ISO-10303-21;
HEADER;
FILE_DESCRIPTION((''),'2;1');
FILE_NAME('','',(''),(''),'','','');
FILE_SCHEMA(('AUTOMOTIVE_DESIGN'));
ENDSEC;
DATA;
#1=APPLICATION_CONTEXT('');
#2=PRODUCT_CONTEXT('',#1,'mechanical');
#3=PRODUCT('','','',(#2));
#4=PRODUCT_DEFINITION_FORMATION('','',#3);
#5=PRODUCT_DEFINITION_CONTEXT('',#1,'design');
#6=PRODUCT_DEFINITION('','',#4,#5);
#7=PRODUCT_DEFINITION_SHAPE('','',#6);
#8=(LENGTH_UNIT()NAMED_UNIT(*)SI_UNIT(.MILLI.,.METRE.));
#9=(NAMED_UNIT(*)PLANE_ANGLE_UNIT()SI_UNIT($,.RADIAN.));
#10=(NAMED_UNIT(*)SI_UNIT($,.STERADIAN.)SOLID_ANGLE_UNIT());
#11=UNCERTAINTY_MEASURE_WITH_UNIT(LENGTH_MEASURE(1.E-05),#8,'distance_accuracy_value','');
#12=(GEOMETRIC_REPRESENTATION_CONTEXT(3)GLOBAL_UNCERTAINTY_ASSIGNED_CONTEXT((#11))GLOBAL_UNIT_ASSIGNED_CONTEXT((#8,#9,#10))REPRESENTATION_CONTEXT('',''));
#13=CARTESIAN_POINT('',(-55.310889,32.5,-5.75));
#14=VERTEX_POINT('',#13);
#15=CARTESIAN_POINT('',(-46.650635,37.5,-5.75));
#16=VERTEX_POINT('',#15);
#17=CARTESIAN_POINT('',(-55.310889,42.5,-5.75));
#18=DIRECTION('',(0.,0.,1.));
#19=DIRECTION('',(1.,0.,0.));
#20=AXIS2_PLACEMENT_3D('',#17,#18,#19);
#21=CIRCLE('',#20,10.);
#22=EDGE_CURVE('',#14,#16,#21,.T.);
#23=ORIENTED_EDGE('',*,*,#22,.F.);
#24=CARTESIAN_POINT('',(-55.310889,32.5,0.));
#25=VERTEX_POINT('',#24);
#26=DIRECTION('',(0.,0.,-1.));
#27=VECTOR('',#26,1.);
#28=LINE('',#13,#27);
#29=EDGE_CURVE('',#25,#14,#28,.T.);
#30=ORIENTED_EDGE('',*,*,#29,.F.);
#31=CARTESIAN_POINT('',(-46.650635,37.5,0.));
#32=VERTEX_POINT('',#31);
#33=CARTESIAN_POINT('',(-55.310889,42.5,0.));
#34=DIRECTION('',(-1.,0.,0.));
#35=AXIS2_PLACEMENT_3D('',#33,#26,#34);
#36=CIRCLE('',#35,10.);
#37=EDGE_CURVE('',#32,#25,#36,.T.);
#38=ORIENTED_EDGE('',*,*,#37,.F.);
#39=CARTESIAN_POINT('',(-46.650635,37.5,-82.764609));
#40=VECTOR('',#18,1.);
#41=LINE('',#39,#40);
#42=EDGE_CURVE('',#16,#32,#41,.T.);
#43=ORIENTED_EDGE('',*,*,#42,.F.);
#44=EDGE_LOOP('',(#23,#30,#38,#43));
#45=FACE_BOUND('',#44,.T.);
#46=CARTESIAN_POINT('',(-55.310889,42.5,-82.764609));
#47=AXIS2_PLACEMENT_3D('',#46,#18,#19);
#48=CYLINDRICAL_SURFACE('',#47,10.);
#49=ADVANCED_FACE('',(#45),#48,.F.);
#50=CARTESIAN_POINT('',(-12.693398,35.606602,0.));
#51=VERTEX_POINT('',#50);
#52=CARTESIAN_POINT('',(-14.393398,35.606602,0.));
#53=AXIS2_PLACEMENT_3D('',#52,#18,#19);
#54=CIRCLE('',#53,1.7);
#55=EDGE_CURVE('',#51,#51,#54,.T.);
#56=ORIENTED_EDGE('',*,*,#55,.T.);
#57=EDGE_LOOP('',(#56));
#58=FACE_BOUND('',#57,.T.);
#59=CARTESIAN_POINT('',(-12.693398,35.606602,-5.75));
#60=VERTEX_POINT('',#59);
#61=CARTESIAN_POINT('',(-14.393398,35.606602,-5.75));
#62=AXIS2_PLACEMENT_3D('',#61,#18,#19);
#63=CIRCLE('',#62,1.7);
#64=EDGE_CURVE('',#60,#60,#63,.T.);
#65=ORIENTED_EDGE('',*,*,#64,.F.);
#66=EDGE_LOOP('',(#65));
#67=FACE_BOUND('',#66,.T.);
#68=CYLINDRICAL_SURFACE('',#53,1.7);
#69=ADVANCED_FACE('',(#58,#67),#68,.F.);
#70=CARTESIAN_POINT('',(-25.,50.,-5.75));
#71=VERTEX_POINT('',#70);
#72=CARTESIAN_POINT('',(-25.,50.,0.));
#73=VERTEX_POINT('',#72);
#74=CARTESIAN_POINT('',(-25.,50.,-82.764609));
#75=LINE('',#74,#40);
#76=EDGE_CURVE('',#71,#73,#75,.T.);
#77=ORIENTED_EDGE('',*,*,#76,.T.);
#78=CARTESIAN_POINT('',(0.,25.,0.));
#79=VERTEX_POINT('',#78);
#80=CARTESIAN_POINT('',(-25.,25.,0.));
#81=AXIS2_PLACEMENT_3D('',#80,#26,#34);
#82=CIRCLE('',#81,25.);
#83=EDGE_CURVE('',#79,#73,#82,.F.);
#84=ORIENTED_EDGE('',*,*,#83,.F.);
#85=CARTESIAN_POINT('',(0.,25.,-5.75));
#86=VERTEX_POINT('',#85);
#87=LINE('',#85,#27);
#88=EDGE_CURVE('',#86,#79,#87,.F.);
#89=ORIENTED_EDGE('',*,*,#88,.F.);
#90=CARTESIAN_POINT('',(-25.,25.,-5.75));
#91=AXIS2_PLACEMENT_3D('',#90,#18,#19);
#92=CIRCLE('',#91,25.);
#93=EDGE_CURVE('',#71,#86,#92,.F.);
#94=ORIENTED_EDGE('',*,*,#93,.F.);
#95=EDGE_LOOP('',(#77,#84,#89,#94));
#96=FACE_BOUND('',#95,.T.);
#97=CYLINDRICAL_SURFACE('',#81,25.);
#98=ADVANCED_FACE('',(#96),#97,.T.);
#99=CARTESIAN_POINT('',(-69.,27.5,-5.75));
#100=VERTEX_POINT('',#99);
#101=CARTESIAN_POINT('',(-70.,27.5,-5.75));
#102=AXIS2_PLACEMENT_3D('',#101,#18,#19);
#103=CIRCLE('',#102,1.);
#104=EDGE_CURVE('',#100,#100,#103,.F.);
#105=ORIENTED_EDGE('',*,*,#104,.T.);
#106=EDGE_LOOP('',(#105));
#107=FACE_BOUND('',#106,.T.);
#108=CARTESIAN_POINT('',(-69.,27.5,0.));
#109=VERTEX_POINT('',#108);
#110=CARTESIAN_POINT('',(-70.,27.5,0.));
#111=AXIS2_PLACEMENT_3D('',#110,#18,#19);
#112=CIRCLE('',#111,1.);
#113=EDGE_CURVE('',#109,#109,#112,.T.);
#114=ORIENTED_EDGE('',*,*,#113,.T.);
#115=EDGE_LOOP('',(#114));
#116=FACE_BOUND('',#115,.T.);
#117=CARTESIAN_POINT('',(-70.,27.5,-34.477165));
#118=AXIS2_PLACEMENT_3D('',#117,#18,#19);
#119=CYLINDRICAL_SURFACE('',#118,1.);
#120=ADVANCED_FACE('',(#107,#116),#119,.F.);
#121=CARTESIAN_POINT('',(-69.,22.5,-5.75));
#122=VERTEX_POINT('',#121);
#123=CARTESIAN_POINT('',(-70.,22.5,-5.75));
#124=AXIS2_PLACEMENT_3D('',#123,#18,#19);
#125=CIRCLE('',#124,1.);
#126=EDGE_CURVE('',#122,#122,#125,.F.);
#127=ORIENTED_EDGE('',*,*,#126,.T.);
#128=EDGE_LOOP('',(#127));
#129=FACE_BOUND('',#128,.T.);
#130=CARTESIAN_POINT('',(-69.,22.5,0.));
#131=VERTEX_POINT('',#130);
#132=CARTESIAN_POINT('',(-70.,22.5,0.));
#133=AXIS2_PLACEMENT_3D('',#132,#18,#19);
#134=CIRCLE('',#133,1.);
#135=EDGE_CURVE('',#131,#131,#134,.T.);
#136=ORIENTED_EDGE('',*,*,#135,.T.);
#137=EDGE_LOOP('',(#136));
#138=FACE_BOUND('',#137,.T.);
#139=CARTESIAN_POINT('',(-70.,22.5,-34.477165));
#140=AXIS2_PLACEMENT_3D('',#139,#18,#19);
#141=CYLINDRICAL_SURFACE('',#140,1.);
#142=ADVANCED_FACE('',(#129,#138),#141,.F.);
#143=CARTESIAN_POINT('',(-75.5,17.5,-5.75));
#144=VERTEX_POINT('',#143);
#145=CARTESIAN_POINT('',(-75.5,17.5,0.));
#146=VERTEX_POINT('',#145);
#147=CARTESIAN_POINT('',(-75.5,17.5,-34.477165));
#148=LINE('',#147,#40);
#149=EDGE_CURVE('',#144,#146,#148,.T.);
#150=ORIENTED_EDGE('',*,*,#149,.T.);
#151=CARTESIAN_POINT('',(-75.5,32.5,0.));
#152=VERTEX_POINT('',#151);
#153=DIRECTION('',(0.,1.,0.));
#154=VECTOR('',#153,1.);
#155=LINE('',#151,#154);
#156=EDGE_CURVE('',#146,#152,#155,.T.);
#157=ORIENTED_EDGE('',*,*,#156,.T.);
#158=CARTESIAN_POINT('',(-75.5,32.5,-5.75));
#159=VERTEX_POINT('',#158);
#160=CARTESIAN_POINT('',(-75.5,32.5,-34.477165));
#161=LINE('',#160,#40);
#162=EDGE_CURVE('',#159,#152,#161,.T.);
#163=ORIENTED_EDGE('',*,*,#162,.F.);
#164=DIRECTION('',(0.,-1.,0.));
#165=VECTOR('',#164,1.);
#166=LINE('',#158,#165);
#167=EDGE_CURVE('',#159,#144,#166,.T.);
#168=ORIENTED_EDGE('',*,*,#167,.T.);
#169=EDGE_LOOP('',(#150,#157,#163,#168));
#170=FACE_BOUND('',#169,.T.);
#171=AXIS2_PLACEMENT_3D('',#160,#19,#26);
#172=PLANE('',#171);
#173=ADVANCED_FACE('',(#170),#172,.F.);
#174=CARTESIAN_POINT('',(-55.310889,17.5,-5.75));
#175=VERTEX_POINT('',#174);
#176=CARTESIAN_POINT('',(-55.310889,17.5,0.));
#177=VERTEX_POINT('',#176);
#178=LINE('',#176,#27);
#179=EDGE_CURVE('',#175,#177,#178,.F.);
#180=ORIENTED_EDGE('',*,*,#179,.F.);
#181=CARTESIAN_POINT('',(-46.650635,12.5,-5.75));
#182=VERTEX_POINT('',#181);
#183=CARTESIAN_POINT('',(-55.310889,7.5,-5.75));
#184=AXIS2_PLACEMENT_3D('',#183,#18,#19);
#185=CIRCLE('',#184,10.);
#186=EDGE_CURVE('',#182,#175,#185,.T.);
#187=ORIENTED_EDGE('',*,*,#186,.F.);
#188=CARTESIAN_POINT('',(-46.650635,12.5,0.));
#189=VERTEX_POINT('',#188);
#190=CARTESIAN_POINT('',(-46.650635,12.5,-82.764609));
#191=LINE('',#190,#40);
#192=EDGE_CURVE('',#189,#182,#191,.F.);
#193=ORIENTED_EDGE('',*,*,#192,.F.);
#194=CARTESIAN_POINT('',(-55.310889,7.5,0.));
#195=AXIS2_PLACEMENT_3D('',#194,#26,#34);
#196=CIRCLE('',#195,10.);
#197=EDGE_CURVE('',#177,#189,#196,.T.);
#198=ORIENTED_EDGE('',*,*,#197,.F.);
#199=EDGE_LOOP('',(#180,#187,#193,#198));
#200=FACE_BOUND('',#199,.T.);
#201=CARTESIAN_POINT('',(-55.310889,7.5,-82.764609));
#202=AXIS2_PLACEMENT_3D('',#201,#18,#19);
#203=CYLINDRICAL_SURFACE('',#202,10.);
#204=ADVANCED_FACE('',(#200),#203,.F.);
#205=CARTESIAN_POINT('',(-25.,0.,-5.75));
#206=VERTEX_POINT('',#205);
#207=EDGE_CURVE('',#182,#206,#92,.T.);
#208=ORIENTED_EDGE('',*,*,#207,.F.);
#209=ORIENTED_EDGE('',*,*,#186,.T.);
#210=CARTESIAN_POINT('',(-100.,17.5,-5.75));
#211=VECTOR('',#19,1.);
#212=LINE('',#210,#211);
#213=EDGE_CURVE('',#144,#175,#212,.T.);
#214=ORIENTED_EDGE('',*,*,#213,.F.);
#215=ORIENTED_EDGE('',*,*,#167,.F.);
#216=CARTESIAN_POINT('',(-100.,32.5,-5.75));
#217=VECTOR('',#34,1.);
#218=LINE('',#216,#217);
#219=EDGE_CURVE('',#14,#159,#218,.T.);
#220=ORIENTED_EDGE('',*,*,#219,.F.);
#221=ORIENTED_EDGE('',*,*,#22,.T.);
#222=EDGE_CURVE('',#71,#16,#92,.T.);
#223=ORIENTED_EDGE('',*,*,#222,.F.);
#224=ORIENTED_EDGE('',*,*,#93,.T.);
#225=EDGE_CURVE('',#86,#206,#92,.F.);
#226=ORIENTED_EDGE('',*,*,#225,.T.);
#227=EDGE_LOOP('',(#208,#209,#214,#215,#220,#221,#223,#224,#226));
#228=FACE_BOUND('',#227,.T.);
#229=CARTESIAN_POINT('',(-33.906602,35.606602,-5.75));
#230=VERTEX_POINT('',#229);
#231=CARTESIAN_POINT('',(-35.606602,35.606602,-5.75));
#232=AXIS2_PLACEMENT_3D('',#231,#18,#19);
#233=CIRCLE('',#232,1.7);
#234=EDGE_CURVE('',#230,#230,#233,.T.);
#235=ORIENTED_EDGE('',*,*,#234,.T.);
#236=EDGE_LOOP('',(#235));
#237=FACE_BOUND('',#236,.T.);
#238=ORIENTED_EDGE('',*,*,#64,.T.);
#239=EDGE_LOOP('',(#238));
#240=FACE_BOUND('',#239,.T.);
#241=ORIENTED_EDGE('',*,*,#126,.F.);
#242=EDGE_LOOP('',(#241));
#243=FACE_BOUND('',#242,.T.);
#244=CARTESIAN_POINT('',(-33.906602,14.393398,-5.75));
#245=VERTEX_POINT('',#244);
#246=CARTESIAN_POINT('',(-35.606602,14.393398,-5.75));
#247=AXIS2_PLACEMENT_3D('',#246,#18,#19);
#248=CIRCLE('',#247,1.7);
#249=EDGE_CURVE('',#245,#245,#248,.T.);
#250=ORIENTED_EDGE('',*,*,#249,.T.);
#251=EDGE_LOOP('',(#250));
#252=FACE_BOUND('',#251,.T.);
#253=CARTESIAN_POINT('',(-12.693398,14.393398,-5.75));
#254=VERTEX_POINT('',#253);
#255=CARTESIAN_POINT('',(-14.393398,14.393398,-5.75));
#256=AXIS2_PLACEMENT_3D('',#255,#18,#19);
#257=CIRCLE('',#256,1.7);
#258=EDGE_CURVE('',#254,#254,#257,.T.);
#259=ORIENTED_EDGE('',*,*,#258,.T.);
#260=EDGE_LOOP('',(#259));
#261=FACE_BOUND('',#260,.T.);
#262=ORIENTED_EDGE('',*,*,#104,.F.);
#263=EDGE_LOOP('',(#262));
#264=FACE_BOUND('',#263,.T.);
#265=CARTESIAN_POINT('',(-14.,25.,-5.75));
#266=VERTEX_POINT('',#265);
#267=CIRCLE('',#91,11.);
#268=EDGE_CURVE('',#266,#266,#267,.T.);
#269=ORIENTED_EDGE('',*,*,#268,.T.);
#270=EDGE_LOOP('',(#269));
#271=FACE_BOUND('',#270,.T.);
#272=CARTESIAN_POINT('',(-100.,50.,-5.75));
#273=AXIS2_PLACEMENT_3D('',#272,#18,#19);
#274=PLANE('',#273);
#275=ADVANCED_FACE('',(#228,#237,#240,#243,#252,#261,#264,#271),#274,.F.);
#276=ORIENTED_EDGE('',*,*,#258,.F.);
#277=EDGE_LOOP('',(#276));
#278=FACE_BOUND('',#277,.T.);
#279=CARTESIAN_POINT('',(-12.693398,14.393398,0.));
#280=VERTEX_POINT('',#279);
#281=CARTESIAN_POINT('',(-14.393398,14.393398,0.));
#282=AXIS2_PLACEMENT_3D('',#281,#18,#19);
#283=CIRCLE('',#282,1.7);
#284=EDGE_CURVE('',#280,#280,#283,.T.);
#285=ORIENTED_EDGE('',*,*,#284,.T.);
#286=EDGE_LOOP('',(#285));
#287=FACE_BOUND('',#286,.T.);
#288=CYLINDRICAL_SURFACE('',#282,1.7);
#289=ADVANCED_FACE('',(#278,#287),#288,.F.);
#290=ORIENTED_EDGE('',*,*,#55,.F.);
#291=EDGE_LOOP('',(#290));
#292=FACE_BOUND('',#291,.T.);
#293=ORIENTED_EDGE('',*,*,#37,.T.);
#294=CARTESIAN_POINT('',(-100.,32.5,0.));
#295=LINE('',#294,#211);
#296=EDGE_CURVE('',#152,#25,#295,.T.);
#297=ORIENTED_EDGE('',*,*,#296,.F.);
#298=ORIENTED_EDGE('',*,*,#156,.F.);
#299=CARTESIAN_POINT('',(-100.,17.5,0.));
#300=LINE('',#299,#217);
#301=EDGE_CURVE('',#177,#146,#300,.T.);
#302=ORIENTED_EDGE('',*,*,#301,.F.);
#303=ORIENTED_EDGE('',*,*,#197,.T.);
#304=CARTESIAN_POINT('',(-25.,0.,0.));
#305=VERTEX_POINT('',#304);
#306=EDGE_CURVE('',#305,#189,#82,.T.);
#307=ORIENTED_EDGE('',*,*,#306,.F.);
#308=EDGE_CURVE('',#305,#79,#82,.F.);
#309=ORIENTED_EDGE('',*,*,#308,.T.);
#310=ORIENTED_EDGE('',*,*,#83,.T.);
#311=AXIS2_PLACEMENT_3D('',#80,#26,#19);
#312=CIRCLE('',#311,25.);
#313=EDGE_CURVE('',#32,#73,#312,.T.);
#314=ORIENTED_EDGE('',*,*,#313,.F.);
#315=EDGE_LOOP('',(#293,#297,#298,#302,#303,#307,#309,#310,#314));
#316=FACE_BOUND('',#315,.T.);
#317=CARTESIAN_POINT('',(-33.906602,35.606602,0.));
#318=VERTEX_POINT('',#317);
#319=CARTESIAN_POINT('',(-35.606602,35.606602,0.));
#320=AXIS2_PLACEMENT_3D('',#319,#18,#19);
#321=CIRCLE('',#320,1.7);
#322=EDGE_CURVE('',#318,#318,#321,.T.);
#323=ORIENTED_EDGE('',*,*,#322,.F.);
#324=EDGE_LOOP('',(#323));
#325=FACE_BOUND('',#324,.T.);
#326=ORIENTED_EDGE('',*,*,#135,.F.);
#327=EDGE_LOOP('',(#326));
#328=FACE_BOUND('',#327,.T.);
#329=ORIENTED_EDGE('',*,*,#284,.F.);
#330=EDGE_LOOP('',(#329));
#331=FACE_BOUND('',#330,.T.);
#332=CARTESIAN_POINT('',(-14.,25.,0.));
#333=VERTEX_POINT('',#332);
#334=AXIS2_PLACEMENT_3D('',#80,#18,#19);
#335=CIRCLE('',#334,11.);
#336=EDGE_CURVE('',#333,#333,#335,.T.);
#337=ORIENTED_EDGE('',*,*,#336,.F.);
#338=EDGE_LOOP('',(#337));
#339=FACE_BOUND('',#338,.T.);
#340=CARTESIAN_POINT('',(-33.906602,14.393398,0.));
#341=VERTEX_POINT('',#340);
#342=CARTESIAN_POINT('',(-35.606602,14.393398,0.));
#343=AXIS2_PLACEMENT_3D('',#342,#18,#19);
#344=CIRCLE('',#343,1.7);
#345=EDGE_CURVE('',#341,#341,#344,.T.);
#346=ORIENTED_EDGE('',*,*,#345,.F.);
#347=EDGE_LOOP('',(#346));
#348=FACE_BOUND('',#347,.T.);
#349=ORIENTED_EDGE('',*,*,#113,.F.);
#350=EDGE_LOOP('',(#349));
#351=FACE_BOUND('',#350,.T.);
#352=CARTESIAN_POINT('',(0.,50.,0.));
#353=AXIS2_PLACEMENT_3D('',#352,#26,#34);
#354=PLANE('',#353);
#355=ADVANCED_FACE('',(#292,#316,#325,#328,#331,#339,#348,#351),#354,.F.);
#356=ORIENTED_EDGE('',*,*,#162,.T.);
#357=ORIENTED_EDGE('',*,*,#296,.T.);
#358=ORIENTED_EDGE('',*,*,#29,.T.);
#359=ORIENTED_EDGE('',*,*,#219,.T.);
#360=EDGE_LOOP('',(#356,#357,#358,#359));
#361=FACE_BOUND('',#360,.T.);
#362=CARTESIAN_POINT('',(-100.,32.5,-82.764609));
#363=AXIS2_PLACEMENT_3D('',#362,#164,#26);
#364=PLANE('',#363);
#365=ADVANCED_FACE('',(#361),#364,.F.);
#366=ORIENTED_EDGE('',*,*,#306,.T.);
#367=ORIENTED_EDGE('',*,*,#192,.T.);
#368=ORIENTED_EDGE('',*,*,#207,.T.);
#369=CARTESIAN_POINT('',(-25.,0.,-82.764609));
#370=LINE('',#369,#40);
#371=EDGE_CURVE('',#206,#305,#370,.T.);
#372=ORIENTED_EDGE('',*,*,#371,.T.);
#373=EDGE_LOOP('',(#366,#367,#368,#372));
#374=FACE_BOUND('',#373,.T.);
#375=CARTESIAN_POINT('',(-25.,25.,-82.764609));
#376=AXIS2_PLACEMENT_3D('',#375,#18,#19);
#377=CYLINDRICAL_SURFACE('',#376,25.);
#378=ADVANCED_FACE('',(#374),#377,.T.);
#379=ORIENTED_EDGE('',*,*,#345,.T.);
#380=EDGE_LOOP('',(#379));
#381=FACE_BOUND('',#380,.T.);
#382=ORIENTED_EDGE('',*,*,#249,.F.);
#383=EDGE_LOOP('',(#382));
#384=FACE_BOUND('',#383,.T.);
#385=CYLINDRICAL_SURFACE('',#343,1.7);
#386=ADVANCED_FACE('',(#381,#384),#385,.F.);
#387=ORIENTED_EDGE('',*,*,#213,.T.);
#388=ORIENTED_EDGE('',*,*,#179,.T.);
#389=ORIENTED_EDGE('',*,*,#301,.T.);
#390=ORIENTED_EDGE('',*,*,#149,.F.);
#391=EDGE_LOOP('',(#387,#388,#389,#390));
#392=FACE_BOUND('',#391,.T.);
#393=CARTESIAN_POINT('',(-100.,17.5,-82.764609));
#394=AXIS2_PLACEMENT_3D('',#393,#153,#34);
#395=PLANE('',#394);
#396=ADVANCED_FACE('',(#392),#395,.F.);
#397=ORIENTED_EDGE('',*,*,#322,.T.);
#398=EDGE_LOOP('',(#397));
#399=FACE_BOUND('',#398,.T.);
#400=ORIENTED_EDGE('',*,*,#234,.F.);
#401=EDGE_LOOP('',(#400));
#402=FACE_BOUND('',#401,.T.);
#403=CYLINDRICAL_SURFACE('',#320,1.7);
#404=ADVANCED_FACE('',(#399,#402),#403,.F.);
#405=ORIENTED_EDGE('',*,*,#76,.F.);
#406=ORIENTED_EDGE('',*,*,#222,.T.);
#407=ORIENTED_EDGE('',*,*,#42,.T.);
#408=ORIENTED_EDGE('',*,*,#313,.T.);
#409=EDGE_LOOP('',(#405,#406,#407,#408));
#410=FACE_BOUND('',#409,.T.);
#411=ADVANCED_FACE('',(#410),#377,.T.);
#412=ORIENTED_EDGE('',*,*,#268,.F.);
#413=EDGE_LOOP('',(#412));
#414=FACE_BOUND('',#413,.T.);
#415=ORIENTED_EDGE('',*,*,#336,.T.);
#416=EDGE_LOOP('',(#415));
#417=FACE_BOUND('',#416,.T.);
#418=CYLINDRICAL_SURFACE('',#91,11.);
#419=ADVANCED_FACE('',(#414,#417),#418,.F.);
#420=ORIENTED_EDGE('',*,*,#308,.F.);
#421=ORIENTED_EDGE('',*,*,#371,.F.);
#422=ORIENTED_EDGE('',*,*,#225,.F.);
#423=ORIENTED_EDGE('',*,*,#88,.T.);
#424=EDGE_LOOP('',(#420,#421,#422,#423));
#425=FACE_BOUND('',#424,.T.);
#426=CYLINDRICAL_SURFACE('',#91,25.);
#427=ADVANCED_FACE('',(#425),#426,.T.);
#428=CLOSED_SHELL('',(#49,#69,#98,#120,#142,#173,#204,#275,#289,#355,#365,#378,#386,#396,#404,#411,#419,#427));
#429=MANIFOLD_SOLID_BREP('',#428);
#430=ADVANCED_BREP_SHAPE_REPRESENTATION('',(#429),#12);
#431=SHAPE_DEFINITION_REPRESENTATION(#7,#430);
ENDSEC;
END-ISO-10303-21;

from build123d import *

# Parameters (mm, degrees)
SKETCH2_W            = 100
SKETCH2_H            = 5.75
BOSS_EXTRUDE1_DEPTH  = 50
SKETCH4_R            = 11
CUT_EXTRUDE1_DEPTH   = 112.951161227
M3_CLEARANCE_HOLE2_D = 3.4
CUT_EXTRUDE3_DEPTH   = 5.75
FILLET1_R            = 25
FILLET2_R            = 10
M3_CLEARANCE_HOLE3_D = 3.4
SKETCH12_R           = 1
SKETCH12_W           = 24.5
SKETCH12_H           = 15
CUT_EXTRUDE4_DEPTH   = 5.75


with BuildPart() as part:
    # Sketch2 → Boss-Extrude1 (new body)
    with BuildSketch(Plane(origin=(0, 0, 0), x_dir=(1, 0, 0), z_dir=(0, 1, 0))):
        with Locations((-50, 2.875)):
            Rectangle(SKETCH2_W, SKETCH2_H)
    extrude(amount=BOSS_EXTRUDE1_DEPTH)

    # Sketch4 → Cut-Extrude1 (cut, through all)
    with BuildSketch(Plane.XY):
        with Locations((-25, 25)):
            Circle(SKETCH4_R)
    extrude(amount=-CUT_EXTRUDE1_DEPTH, mode=Mode.SUBTRACT)

    # M3 Clearance Hole2 (through all)
    with Locations(Plane.XY):
        with Locations((-35.606601718, 14.393398282), (-35.606601718, 35.606601718), (-14.393398282, 35.606601718), (-14.393398282, 14.393398282)):
            Hole(M3_CLEARANCE_HOLE2_D / 2)

    # Sketch9 → Cut-Extrude3 (cut)
    with BuildSketch(Plane.XY):
        with BuildLine():
            Line((-25, 50), (-100, 50))
            Line((-100, 50), (-100, 32.5))
            Line((-100, 32.5), (-48.848480035, 32.5))
            ThreePointArc((-48.848480035, 32.5), (-39.790199458, 45.155644371), (-25, 50))
        make_face()
        with BuildLine():
            Line((-25, 0), (-100, 0))
            Line((-100, 0), (-100, 17.5))
            Line((-100, 17.5), (-48.848480035, 17.5))
            ThreePointArc((-48.848480035, 17.5), (-39.790199458, 4.844355629), (-25, 0))
        make_face()
    extrude(amount=-CUT_EXTRUDE3_DEPTH, mode=Mode.SUBTRACT)

    # Fillet1
    fillet1_edges = [part.edges().sort_by_distance(p)[0] for p in [
        (0, 0, -2.875),
        (0, 50, -2.875),
    ]]
    fillet(fillet1_edges, radius=FILLET1_R - 0.0001)  # a hair under: the kernel refuses the full size

    # Fillet2
    fillet2_edges = [part.edges().sort_by_distance(p)[0] for p in [
        (-48.848480035, 32.5, -2.875),
        (-48.848480035, 17.5, -2.875),
    ]]
    fillet(fillet2_edges, radius=FILLET2_R)

    # M3 Clearance Hole3 (through all)
    with Locations(Plane.XY):
        with Locations((-94, 28.5), (-94, 21.5)):
            Hole(M3_CLEARANCE_HOLE3_D / 2)

    # Sketch12 → Cut-Extrude4 (cut)
    with BuildSketch(Plane.XY):
        with Locations((-70, 27.5)):
            Circle(SKETCH12_R)
        with Locations((-70, 22.5)):
            Circle(SKETCH12_R)
        with Locations((-87.75, 25)):
            Rectangle(SKETCH12_W, SKETCH12_H)
    extrude(amount=-CUT_EXTRUDE4_DEPTH, mode=Mode.SUBTRACT)


solid = part.part
